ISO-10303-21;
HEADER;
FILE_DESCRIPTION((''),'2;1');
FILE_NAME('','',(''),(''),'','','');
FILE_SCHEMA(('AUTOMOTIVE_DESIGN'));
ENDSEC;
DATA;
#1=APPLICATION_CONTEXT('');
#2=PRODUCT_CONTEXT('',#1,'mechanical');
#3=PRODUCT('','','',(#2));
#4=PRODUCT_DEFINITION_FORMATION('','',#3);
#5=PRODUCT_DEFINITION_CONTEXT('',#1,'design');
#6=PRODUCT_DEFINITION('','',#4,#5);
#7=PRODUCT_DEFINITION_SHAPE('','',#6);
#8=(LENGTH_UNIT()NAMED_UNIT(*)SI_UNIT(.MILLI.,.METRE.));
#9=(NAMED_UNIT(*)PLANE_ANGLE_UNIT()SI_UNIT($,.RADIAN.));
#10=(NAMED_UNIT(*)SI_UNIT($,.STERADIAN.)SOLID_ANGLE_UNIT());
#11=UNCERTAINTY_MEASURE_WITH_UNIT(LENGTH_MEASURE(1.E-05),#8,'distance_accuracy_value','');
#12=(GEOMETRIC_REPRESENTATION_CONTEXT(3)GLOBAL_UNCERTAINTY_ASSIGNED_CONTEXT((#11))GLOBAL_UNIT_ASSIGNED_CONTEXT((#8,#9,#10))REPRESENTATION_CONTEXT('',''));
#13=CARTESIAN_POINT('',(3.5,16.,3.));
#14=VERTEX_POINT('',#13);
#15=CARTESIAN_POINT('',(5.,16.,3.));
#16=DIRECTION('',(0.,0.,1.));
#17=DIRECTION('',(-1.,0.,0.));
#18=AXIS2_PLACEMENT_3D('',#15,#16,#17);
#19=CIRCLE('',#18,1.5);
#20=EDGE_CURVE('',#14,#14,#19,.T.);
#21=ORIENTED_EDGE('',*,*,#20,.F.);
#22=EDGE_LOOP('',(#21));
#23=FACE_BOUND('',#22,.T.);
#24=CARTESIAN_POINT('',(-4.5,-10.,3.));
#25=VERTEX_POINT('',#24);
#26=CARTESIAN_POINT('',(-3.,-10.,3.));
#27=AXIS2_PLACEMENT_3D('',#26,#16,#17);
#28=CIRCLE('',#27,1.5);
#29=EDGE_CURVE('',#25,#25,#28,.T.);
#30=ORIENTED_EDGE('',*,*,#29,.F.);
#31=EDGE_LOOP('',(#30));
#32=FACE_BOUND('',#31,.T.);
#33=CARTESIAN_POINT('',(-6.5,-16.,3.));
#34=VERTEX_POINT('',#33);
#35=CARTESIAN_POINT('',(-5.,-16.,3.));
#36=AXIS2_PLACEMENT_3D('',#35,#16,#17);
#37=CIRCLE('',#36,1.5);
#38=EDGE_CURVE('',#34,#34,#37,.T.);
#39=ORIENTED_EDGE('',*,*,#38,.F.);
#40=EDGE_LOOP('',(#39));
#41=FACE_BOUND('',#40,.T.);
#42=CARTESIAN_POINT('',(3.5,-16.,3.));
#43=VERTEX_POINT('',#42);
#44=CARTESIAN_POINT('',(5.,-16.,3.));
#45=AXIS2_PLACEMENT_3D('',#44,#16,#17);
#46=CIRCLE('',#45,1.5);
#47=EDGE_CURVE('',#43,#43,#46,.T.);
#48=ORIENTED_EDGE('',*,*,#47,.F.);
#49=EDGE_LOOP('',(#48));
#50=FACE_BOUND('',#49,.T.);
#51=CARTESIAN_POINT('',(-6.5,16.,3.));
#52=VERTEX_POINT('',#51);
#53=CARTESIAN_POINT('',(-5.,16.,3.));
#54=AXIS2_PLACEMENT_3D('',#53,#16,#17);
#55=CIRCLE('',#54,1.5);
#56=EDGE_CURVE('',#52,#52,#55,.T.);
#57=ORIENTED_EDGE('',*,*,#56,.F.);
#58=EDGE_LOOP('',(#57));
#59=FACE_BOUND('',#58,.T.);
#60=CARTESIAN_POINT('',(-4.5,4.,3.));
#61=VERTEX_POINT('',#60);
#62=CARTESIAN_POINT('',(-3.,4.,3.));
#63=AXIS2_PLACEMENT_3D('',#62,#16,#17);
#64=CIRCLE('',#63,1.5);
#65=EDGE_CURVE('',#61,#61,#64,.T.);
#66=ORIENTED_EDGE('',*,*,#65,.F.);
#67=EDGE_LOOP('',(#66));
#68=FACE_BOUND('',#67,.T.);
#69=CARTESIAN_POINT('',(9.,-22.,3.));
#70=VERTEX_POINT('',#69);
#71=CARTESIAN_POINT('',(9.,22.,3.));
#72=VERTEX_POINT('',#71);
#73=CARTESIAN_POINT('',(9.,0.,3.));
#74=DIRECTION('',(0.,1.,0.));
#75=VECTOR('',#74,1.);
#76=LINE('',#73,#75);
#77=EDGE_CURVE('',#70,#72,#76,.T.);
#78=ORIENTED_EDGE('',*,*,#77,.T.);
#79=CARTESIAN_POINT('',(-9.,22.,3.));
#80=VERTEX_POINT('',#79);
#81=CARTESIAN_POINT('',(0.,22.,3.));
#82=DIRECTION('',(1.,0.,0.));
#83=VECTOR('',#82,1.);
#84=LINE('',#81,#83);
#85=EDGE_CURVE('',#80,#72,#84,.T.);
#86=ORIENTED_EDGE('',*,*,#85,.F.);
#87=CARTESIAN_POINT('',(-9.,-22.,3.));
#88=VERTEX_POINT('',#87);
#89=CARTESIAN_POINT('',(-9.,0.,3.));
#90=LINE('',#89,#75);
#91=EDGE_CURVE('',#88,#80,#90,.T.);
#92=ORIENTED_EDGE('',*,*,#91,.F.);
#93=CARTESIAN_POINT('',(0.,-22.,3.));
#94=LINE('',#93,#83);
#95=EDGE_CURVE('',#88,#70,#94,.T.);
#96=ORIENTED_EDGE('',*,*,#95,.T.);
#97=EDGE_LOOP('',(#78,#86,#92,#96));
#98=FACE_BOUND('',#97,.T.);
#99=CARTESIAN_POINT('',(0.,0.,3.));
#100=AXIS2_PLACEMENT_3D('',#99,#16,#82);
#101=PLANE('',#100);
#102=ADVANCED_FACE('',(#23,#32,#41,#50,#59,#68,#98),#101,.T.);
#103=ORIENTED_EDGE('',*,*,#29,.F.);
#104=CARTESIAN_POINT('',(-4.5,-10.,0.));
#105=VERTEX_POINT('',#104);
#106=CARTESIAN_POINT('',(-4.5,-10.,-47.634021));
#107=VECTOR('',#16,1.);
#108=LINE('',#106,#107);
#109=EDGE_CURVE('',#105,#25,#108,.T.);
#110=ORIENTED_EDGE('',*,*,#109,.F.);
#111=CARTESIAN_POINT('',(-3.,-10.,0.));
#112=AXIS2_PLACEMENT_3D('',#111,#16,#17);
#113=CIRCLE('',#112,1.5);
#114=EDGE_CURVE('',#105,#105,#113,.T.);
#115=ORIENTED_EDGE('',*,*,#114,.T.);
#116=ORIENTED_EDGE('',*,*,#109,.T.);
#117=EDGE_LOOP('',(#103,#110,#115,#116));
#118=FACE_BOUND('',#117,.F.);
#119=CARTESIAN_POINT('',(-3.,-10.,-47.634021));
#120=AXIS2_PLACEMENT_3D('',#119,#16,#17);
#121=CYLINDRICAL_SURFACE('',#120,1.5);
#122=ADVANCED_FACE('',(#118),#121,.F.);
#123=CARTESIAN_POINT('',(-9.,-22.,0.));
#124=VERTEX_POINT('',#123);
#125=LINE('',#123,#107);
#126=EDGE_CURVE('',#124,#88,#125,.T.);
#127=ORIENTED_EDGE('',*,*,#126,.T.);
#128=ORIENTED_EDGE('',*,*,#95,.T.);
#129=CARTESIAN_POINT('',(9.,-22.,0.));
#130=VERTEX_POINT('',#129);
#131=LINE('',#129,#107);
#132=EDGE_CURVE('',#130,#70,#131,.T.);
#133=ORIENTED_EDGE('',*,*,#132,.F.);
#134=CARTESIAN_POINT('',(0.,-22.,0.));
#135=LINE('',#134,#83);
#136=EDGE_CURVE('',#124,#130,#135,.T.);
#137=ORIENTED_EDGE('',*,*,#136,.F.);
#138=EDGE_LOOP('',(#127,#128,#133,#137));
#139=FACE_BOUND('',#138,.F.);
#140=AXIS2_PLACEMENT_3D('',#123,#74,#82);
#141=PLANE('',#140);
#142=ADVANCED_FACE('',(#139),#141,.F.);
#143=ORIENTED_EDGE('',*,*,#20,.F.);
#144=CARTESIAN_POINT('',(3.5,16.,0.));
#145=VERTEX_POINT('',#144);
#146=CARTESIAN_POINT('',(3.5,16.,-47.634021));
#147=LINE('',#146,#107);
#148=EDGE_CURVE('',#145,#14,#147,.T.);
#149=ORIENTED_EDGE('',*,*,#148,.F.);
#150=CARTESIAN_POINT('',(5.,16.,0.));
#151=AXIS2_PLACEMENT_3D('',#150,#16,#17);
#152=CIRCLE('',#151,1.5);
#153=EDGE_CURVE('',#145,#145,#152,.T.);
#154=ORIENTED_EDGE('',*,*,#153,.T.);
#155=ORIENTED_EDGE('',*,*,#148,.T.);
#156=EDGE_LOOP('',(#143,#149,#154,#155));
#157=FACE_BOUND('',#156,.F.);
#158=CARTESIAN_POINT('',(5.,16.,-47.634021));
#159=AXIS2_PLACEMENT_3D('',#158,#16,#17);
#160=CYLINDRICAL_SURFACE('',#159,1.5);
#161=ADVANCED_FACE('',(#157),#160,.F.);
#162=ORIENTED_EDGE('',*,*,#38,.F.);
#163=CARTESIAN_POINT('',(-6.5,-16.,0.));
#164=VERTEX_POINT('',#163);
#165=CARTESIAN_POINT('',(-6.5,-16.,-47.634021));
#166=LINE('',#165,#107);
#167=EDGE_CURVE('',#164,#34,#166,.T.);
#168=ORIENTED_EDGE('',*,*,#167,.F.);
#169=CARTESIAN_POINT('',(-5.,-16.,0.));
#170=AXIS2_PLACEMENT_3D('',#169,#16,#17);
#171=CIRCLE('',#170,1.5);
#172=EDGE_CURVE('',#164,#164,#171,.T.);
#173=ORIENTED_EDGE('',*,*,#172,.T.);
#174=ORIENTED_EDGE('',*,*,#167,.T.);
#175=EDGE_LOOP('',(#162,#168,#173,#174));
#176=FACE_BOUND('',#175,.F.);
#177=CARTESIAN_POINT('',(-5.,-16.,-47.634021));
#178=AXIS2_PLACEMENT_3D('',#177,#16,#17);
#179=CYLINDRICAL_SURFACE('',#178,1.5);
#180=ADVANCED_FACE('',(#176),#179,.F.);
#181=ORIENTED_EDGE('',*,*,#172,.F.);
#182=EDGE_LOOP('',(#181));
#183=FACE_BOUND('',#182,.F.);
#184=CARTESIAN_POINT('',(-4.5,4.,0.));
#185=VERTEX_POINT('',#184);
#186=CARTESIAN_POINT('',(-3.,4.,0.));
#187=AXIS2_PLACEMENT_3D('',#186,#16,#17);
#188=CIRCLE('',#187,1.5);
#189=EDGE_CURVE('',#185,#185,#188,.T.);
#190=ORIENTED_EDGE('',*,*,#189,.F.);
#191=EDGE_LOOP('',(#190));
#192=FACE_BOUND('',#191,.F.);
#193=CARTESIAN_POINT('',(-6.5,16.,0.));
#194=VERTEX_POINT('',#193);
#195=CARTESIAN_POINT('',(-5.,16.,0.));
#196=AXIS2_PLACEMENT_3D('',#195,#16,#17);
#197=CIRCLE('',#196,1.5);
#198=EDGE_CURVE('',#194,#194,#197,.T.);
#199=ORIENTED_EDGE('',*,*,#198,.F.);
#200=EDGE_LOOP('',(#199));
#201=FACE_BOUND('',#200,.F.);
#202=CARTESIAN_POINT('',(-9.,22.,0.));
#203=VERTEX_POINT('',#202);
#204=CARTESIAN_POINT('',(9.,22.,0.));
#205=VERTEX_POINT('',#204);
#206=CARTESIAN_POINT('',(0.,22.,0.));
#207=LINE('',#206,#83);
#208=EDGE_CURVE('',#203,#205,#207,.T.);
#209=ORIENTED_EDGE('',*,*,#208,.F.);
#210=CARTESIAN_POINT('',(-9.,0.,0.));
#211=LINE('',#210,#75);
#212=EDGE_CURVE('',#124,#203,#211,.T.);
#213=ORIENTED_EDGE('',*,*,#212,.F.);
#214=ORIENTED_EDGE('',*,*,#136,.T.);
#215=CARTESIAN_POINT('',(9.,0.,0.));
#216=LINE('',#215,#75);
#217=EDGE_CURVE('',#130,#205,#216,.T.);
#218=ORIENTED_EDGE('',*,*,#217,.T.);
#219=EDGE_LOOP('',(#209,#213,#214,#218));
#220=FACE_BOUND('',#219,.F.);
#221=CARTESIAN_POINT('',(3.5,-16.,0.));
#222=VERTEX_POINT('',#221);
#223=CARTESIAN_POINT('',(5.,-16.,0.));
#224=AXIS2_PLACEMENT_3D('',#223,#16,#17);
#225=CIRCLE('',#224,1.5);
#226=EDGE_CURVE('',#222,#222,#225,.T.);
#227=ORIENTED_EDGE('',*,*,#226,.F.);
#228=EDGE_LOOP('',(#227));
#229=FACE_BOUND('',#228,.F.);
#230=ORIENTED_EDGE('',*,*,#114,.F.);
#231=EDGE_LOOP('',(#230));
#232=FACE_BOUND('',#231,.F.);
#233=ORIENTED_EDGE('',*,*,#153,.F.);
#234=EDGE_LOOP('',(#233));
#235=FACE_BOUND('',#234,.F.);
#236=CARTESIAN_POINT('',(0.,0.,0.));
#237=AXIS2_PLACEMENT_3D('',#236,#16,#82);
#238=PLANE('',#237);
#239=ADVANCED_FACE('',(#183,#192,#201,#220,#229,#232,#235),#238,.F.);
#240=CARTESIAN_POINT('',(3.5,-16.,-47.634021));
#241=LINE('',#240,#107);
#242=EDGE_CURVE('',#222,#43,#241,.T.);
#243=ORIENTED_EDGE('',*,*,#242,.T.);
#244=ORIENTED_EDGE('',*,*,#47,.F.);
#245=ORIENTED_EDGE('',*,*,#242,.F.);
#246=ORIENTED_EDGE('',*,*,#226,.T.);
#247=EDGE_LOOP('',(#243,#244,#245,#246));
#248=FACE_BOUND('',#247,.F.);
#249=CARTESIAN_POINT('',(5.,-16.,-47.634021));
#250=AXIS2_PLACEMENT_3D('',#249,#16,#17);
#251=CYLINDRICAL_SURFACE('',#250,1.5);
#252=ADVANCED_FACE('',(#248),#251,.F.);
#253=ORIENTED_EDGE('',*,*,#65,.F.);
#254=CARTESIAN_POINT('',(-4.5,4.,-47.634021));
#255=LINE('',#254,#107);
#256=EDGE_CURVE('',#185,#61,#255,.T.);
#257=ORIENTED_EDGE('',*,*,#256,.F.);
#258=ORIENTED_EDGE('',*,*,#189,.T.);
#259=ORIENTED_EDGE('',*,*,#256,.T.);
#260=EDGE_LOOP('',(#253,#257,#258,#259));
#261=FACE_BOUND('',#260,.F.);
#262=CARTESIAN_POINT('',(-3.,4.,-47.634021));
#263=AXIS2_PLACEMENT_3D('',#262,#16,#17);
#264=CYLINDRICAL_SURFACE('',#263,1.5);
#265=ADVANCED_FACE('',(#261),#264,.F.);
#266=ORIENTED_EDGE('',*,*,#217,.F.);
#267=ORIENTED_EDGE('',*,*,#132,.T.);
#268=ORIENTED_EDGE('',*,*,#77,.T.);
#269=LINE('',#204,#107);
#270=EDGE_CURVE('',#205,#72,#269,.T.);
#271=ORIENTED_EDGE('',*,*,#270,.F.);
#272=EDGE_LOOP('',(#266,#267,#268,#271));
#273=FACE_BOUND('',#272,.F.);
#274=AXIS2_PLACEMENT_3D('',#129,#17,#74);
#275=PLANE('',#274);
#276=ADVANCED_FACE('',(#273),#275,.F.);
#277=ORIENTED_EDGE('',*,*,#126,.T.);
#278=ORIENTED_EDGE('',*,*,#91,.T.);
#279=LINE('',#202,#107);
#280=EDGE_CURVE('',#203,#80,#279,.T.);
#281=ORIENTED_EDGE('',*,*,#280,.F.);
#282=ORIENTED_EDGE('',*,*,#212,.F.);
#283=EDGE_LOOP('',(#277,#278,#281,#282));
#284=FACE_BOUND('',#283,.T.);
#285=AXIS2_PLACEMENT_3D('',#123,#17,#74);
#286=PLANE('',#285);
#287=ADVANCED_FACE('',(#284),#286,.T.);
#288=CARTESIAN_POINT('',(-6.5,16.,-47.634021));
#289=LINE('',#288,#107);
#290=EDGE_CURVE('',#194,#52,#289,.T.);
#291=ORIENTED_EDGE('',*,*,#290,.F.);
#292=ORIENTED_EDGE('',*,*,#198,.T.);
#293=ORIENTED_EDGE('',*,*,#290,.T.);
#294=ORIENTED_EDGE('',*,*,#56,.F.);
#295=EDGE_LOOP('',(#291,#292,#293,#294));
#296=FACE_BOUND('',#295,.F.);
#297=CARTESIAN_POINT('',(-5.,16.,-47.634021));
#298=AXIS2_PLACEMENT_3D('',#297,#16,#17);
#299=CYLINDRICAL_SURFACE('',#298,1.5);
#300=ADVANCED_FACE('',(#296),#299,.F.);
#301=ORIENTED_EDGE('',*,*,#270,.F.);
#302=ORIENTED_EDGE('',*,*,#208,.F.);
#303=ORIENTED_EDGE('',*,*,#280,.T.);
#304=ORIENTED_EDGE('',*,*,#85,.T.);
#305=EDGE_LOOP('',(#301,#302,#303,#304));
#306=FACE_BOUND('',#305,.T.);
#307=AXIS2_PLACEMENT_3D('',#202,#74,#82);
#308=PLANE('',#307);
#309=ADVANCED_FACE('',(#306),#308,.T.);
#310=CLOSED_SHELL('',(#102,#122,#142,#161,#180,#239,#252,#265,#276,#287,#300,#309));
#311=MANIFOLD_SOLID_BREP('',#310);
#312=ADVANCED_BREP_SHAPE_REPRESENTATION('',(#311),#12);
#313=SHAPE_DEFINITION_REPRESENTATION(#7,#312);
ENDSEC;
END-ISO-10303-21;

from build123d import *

# Parameters (mm, degrees)
F0_W     = 18
F0_H     = 44
F1_DEPTH = 3
F2_D     = 3


# Not quite as in the source:
# - a feature names something its author has since deleted; it is built from what else it names


with BuildPart() as f1:
    # F0 (on Top) → F1 (new body)
    with BuildSketch(Plane.XY):
        Rectangle(F0_W, F0_H)
    extrude(amount=F1_DEPTH)

    # F2 (through all)
    with Locations(Plane(origin=(0, 0, 0), x_dir=(1, 0, 0), z_dir=(0, 0, -1))):
        with Locations((-5, -16), (5, 16), (5, -16), (-5, 16), (-3, 10), (-3, -4)):
            Hole(F2_D / 2)


solid = f1.part
